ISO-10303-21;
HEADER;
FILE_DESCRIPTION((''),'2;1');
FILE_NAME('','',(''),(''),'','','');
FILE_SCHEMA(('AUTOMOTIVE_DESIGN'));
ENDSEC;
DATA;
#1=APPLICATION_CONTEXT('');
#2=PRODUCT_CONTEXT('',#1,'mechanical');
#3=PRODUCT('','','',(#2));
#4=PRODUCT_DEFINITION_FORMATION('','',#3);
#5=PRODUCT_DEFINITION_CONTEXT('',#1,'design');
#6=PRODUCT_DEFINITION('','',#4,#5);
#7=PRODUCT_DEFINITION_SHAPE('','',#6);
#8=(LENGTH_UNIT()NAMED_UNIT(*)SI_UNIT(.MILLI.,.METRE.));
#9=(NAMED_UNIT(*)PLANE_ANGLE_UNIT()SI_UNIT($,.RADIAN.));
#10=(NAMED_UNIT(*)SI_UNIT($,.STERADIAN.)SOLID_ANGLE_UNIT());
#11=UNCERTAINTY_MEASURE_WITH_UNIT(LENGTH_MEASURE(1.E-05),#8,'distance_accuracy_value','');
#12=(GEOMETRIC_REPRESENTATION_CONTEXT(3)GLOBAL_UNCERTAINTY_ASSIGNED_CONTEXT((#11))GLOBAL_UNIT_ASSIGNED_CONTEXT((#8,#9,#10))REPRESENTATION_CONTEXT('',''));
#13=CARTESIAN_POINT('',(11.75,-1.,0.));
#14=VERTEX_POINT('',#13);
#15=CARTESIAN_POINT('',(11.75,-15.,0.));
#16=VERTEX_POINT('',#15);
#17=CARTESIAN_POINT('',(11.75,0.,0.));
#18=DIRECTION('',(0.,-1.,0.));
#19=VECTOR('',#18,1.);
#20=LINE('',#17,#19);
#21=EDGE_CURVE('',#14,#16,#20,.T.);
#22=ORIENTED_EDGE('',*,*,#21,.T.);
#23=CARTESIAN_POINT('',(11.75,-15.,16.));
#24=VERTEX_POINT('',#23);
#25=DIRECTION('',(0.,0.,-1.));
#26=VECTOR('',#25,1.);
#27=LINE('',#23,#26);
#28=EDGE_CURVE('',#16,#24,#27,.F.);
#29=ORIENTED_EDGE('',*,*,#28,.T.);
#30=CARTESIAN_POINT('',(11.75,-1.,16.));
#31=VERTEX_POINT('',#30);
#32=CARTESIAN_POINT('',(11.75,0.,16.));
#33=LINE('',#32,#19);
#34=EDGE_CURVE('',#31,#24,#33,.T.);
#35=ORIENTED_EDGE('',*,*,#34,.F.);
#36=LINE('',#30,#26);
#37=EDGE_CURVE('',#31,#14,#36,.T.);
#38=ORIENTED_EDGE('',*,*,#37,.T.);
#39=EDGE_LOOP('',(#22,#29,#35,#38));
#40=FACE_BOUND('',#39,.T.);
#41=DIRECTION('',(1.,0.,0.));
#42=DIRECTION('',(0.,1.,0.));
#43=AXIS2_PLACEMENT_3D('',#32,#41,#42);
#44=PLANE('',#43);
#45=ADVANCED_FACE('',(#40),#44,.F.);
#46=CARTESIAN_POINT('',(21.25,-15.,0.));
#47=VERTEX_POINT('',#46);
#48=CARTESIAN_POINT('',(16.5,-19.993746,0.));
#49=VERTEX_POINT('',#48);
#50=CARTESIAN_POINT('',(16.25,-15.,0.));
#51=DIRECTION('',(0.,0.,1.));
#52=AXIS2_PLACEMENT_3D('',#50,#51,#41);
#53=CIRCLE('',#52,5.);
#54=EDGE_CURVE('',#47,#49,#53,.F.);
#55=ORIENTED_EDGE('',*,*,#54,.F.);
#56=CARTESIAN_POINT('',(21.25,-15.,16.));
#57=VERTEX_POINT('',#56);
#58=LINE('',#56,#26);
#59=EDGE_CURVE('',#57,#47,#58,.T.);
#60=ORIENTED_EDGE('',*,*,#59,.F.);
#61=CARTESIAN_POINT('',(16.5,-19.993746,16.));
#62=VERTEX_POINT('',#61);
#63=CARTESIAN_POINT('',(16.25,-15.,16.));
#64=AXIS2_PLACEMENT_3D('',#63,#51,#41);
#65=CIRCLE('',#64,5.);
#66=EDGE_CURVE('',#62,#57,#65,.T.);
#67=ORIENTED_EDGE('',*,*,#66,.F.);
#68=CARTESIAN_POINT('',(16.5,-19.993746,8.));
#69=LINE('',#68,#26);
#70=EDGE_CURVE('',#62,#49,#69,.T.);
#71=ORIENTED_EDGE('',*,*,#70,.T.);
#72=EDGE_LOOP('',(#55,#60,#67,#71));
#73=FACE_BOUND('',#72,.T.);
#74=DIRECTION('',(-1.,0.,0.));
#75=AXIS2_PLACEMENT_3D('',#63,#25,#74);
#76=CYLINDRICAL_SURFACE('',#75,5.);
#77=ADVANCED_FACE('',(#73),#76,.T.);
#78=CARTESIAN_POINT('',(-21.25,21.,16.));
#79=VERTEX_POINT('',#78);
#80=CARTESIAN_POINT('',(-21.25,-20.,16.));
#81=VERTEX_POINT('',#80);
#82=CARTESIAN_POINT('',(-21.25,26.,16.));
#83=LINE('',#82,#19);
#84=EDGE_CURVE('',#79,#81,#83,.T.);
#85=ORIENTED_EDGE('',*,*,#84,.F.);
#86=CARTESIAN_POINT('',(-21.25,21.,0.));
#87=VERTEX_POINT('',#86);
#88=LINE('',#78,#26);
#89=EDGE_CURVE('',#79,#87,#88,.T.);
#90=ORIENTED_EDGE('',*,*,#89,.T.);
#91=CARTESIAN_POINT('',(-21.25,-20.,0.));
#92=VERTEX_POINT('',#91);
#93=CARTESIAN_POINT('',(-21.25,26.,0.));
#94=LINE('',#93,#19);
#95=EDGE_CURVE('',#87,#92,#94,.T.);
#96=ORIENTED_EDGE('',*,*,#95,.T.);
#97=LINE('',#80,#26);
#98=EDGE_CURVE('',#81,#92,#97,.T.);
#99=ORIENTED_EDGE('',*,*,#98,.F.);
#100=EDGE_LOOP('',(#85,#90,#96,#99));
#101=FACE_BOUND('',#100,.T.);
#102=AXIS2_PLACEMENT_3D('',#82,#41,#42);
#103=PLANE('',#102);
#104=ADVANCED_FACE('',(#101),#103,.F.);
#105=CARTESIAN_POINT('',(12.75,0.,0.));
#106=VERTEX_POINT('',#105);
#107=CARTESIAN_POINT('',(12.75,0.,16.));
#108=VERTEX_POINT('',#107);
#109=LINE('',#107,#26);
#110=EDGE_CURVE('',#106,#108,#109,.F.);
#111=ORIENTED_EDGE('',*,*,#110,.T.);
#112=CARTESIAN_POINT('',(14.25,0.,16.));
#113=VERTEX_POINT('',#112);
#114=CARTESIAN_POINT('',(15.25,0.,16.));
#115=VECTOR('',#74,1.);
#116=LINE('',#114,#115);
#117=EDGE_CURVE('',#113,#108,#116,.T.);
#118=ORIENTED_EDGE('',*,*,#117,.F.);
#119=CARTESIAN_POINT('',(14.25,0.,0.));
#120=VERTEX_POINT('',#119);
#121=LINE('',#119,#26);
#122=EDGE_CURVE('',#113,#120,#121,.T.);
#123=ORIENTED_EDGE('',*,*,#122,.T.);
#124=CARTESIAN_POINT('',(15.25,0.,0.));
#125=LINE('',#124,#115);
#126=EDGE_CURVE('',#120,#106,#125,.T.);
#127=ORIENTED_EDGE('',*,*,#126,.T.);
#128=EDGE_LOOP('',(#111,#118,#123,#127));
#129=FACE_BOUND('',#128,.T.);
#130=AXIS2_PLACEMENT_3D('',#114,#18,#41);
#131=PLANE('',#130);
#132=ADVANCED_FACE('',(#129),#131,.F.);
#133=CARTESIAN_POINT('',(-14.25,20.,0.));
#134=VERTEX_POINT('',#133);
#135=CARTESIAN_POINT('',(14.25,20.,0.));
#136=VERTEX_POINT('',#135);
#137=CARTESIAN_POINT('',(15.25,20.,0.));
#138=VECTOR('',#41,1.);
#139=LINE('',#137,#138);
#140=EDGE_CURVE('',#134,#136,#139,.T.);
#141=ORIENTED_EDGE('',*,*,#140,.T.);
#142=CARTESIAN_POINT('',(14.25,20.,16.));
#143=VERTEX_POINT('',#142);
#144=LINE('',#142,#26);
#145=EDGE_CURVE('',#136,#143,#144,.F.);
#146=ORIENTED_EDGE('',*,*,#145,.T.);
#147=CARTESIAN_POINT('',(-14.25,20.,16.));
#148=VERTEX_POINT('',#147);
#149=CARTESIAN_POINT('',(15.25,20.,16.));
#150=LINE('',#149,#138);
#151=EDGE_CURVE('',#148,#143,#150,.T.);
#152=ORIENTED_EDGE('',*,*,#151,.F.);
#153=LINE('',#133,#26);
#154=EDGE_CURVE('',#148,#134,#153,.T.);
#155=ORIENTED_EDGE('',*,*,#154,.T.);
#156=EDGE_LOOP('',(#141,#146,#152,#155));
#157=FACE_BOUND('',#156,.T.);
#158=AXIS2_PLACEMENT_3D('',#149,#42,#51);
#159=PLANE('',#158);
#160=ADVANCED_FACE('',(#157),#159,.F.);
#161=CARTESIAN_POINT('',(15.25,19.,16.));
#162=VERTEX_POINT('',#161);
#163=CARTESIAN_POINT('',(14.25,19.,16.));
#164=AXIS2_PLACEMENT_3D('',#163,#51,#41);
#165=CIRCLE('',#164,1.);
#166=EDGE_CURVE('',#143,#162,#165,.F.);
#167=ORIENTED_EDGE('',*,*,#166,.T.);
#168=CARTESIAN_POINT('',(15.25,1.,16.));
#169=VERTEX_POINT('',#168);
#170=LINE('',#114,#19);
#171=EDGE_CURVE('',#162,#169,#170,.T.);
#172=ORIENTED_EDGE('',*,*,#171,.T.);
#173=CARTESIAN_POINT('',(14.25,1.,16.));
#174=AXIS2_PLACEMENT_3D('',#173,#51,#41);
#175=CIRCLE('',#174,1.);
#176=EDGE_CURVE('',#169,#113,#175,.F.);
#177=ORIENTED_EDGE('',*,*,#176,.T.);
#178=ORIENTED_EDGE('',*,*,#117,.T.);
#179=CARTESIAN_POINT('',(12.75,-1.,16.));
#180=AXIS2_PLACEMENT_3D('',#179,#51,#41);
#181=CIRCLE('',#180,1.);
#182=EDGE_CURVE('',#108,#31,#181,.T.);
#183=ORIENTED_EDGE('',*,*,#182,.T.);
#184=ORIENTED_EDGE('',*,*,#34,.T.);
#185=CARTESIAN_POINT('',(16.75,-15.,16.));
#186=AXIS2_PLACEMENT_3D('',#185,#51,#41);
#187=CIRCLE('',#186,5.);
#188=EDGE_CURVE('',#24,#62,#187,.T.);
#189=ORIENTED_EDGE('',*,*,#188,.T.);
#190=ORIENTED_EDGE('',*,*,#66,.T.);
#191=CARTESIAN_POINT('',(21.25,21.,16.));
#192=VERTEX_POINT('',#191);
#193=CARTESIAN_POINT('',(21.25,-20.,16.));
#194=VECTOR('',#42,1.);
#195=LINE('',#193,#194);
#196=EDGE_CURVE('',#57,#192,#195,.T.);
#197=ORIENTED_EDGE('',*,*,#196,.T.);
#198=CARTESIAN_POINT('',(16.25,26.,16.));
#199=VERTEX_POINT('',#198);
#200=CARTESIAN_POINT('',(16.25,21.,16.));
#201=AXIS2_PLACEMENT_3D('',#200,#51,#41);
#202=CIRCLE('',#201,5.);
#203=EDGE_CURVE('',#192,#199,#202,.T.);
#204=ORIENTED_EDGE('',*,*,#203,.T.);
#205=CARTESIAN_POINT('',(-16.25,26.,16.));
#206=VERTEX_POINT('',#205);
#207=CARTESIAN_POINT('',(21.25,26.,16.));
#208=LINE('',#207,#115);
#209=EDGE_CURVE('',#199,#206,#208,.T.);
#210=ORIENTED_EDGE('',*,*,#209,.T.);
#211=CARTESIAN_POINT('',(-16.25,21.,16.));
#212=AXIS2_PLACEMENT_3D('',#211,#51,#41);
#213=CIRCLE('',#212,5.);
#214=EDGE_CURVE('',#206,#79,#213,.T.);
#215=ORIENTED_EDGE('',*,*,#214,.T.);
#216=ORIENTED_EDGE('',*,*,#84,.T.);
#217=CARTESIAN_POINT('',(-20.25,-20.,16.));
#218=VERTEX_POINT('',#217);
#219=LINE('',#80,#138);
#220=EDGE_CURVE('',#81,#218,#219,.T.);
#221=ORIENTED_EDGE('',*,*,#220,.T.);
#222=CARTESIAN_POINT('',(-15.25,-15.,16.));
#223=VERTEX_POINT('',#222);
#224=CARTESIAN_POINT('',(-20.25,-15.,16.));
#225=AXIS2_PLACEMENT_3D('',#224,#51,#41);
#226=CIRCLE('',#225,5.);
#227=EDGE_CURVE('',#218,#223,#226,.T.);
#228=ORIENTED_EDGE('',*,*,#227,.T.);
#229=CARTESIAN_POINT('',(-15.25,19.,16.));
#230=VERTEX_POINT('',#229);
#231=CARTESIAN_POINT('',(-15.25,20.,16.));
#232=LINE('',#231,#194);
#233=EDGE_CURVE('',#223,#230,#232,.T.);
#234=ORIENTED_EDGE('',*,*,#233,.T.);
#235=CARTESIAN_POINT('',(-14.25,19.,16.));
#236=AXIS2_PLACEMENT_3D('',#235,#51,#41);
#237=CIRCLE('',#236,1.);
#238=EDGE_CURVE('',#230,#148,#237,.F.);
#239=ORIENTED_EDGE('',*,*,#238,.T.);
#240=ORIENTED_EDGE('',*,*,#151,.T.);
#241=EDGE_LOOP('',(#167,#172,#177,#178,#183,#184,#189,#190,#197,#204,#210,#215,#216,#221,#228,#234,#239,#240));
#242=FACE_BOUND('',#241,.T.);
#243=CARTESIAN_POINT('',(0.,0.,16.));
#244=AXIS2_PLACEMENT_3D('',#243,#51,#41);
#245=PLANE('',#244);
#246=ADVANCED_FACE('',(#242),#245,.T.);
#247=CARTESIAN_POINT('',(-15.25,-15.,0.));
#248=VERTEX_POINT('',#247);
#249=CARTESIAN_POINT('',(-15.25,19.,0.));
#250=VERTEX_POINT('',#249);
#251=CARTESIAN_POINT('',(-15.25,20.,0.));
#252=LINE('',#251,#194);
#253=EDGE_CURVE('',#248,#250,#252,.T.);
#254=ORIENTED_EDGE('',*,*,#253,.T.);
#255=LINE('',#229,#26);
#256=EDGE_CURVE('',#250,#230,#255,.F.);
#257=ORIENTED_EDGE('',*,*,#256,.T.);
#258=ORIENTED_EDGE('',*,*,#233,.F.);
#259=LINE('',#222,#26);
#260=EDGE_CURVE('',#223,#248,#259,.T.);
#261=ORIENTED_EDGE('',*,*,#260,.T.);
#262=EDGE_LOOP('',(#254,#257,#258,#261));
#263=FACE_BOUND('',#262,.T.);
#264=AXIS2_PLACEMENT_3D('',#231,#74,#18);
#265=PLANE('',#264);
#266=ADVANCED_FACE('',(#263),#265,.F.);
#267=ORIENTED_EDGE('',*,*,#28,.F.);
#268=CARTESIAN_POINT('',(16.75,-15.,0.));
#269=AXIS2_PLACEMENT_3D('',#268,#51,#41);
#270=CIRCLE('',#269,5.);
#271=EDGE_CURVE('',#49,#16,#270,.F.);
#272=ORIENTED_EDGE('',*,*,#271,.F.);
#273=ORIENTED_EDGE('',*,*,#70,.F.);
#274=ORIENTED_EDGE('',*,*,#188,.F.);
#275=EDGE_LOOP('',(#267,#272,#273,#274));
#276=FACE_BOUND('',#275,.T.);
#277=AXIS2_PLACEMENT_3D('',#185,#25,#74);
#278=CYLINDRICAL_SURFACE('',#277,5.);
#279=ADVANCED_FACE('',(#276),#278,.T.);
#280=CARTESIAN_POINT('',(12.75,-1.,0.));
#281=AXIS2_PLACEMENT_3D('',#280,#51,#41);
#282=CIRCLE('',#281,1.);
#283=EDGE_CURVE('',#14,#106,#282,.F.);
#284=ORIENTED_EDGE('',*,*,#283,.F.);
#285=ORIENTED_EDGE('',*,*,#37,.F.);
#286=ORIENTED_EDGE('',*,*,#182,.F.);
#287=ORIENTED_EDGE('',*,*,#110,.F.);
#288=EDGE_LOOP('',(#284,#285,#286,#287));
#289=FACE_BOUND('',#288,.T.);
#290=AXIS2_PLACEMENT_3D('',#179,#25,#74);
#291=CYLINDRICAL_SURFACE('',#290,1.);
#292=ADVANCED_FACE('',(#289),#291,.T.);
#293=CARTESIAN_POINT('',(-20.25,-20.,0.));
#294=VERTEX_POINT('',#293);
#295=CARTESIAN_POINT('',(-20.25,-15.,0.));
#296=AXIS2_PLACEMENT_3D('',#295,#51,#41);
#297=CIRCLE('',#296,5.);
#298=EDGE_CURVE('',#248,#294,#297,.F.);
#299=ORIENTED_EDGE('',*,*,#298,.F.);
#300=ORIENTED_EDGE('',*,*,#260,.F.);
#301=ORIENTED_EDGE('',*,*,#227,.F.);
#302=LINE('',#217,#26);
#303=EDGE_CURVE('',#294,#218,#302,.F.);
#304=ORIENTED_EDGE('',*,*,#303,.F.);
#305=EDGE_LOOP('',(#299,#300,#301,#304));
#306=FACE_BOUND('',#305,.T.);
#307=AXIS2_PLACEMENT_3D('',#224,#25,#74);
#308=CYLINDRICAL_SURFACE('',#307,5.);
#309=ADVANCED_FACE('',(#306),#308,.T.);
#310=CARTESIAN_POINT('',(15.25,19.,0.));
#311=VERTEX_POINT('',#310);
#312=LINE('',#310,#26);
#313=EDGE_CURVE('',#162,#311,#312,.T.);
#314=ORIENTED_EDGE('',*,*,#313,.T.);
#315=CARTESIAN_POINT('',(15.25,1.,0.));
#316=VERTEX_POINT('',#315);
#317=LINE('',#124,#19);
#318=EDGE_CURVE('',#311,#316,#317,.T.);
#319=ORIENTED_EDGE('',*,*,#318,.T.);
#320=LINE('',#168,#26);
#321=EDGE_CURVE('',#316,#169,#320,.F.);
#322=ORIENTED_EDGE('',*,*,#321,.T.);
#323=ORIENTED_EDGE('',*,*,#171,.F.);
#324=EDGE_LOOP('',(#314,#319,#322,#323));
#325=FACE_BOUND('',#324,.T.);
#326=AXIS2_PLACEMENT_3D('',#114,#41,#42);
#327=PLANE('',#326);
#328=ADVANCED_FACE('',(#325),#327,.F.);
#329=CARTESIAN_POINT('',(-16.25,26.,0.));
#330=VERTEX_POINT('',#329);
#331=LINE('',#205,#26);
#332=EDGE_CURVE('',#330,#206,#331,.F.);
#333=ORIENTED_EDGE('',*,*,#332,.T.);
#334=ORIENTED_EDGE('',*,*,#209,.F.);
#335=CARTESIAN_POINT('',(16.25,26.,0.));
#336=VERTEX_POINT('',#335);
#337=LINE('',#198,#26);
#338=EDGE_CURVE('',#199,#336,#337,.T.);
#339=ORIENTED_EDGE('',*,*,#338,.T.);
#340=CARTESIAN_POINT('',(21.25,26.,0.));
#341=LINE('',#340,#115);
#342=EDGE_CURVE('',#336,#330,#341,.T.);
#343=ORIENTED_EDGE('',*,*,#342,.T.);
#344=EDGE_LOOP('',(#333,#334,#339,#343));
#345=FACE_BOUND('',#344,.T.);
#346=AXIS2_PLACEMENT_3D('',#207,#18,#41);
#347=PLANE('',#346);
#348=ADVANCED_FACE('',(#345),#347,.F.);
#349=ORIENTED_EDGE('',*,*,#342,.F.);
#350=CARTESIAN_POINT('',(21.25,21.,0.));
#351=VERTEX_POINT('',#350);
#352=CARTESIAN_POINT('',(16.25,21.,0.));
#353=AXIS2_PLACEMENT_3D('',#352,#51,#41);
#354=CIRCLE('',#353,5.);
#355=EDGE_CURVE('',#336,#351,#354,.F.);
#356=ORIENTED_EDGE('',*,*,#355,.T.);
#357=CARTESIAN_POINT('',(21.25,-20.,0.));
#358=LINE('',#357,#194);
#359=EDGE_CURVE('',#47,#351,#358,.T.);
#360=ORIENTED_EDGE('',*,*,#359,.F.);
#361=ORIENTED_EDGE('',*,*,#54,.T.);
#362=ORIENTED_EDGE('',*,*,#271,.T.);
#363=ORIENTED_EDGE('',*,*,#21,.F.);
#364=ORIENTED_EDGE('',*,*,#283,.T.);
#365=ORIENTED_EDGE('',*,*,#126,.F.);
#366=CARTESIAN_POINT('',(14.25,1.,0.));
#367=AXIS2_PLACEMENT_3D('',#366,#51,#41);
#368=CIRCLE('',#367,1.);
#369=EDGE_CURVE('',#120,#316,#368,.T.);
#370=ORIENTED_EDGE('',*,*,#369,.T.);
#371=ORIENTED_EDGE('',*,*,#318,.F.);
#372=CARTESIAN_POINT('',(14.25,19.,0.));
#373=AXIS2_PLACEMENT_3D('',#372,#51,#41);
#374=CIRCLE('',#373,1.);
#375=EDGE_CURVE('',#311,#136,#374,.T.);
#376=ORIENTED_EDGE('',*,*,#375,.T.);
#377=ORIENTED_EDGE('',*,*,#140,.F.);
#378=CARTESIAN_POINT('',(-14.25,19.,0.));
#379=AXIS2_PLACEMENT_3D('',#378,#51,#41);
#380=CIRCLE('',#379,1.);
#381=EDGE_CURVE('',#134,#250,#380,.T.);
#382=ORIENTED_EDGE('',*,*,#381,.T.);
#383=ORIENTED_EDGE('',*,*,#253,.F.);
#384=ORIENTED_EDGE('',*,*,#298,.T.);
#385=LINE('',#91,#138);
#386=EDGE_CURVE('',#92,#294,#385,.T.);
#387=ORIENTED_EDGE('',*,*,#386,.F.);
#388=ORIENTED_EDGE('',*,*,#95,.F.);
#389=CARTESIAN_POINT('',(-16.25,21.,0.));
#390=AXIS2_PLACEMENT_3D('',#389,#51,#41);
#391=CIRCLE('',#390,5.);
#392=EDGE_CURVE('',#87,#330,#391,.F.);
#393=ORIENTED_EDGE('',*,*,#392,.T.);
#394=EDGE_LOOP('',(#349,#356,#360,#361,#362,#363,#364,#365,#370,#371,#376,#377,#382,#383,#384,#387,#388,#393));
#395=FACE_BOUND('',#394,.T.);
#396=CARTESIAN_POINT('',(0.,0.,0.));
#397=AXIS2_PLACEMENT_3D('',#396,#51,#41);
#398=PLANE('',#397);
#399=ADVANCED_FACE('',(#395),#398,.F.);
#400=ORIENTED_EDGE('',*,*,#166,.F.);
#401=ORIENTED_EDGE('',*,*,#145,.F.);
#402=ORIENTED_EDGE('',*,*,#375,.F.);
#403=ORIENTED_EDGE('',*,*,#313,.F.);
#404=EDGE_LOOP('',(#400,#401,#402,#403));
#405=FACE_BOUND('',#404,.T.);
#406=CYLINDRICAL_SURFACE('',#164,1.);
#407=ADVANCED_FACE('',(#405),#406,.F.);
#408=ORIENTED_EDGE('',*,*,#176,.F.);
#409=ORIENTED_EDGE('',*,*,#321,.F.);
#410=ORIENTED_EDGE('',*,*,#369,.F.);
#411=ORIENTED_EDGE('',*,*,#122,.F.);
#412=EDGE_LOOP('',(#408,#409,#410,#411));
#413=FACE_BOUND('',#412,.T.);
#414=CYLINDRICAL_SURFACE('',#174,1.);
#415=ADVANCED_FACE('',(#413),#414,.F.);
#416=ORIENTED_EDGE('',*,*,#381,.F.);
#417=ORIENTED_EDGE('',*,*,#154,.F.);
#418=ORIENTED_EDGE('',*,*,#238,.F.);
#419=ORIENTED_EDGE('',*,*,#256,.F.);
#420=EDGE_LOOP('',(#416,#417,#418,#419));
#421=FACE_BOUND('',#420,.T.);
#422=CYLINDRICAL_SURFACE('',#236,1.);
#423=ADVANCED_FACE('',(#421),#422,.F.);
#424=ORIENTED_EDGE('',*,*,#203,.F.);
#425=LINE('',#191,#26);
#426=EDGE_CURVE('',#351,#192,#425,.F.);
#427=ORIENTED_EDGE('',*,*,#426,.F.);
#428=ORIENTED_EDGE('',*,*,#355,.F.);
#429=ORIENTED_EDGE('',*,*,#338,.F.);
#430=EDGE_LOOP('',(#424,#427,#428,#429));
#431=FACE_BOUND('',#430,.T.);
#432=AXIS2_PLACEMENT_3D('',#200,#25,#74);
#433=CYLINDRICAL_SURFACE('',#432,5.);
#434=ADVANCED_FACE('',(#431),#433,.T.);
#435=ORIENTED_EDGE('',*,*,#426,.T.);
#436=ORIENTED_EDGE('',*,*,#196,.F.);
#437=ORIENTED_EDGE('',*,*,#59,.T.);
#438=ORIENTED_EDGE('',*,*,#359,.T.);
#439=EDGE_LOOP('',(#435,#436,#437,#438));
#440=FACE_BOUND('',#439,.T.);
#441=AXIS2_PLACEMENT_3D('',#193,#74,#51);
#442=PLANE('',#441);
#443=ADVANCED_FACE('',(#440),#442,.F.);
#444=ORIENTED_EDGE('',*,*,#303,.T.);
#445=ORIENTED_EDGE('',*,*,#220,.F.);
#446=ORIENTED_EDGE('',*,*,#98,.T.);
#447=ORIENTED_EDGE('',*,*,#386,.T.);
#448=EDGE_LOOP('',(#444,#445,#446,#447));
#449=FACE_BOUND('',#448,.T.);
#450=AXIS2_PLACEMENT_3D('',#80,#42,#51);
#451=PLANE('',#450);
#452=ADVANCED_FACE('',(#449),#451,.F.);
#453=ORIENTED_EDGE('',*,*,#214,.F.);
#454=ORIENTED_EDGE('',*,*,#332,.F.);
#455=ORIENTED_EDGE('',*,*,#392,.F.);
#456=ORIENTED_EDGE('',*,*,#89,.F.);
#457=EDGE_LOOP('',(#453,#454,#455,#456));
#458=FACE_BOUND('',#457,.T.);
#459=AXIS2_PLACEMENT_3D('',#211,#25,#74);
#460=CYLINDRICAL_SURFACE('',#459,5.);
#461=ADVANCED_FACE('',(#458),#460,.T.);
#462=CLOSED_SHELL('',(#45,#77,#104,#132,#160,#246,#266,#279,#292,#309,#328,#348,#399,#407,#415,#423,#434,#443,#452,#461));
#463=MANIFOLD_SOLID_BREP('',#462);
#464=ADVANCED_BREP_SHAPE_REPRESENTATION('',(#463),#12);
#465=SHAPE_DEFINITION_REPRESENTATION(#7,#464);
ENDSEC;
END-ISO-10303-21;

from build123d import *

# Parameters (mm, degrees)
BOSS_EXTRUDE1_DEPTH = 16
FILLET1_R           = 5
FILLET2_R           = 1


with BuildPart() as part:
    # Sketch1 → Boss-Extrude1 (new body)
    with BuildSketch(Plane.XY):
        Polygon((15.25, 0), (11.75, 0), (11.75, -20), (21.25, -20), (21.25, 26), (-21.25, 26), (-21.25, -20), (-15.25, -20), (-15.25, 20), (15.25, 20), align=None)
    extrude(amount=BOSS_EXTRUDE1_DEPTH)

    # Fillet1
    # the kernel refuses this fillet: 5 mm, written as the material it takes off along each edge
    with BuildSketch(Plane(origin=(-15.25, -20, -12.5), x_dir=(-1, 0, 0), z_dir=(0, 0, 1)), Plane(origin=(-21.25, 26, -12.5), x_dir=(1, 0, 0), z_dir=(0, 0, 1)), Plane(origin=(21.25, 26, -12.5), x_dir=(0, -1, 0), z_dir=(0, 0, 1)), Plane(origin=(21.25, -20, -12.5), x_dir=(-1, 0, 0), z_dir=(0, 0, 1)), Plane(origin=(11.75, -20, -12.5), x_dir=(0, 1, 0), z_dir=(0, 0, 1))) as fillet1_piece_1:
        with BuildLine():
            CenterArc((FILLET1_R, -FILLET1_R), FILLET1_R, 90, 90)
            Line((0, -FILLET1_R), (0, 0))
            Line((0, 0), (FILLET1_R, 0))
        make_face()
    extrude(amount=41, mode=Mode.SUBTRACT)

    # Fillet2
    fillet2_edges = [part.edges().sort_by_distance(p)[0] for p in [
        (11.75, 0, 8),
        (15.25, 0, 8),
        (15.25, 20, 8),
        (-15.25, 20, 8),
    ]]
    fillet(fillet2_edges, radius=FILLET2_R)


solid = part.part
